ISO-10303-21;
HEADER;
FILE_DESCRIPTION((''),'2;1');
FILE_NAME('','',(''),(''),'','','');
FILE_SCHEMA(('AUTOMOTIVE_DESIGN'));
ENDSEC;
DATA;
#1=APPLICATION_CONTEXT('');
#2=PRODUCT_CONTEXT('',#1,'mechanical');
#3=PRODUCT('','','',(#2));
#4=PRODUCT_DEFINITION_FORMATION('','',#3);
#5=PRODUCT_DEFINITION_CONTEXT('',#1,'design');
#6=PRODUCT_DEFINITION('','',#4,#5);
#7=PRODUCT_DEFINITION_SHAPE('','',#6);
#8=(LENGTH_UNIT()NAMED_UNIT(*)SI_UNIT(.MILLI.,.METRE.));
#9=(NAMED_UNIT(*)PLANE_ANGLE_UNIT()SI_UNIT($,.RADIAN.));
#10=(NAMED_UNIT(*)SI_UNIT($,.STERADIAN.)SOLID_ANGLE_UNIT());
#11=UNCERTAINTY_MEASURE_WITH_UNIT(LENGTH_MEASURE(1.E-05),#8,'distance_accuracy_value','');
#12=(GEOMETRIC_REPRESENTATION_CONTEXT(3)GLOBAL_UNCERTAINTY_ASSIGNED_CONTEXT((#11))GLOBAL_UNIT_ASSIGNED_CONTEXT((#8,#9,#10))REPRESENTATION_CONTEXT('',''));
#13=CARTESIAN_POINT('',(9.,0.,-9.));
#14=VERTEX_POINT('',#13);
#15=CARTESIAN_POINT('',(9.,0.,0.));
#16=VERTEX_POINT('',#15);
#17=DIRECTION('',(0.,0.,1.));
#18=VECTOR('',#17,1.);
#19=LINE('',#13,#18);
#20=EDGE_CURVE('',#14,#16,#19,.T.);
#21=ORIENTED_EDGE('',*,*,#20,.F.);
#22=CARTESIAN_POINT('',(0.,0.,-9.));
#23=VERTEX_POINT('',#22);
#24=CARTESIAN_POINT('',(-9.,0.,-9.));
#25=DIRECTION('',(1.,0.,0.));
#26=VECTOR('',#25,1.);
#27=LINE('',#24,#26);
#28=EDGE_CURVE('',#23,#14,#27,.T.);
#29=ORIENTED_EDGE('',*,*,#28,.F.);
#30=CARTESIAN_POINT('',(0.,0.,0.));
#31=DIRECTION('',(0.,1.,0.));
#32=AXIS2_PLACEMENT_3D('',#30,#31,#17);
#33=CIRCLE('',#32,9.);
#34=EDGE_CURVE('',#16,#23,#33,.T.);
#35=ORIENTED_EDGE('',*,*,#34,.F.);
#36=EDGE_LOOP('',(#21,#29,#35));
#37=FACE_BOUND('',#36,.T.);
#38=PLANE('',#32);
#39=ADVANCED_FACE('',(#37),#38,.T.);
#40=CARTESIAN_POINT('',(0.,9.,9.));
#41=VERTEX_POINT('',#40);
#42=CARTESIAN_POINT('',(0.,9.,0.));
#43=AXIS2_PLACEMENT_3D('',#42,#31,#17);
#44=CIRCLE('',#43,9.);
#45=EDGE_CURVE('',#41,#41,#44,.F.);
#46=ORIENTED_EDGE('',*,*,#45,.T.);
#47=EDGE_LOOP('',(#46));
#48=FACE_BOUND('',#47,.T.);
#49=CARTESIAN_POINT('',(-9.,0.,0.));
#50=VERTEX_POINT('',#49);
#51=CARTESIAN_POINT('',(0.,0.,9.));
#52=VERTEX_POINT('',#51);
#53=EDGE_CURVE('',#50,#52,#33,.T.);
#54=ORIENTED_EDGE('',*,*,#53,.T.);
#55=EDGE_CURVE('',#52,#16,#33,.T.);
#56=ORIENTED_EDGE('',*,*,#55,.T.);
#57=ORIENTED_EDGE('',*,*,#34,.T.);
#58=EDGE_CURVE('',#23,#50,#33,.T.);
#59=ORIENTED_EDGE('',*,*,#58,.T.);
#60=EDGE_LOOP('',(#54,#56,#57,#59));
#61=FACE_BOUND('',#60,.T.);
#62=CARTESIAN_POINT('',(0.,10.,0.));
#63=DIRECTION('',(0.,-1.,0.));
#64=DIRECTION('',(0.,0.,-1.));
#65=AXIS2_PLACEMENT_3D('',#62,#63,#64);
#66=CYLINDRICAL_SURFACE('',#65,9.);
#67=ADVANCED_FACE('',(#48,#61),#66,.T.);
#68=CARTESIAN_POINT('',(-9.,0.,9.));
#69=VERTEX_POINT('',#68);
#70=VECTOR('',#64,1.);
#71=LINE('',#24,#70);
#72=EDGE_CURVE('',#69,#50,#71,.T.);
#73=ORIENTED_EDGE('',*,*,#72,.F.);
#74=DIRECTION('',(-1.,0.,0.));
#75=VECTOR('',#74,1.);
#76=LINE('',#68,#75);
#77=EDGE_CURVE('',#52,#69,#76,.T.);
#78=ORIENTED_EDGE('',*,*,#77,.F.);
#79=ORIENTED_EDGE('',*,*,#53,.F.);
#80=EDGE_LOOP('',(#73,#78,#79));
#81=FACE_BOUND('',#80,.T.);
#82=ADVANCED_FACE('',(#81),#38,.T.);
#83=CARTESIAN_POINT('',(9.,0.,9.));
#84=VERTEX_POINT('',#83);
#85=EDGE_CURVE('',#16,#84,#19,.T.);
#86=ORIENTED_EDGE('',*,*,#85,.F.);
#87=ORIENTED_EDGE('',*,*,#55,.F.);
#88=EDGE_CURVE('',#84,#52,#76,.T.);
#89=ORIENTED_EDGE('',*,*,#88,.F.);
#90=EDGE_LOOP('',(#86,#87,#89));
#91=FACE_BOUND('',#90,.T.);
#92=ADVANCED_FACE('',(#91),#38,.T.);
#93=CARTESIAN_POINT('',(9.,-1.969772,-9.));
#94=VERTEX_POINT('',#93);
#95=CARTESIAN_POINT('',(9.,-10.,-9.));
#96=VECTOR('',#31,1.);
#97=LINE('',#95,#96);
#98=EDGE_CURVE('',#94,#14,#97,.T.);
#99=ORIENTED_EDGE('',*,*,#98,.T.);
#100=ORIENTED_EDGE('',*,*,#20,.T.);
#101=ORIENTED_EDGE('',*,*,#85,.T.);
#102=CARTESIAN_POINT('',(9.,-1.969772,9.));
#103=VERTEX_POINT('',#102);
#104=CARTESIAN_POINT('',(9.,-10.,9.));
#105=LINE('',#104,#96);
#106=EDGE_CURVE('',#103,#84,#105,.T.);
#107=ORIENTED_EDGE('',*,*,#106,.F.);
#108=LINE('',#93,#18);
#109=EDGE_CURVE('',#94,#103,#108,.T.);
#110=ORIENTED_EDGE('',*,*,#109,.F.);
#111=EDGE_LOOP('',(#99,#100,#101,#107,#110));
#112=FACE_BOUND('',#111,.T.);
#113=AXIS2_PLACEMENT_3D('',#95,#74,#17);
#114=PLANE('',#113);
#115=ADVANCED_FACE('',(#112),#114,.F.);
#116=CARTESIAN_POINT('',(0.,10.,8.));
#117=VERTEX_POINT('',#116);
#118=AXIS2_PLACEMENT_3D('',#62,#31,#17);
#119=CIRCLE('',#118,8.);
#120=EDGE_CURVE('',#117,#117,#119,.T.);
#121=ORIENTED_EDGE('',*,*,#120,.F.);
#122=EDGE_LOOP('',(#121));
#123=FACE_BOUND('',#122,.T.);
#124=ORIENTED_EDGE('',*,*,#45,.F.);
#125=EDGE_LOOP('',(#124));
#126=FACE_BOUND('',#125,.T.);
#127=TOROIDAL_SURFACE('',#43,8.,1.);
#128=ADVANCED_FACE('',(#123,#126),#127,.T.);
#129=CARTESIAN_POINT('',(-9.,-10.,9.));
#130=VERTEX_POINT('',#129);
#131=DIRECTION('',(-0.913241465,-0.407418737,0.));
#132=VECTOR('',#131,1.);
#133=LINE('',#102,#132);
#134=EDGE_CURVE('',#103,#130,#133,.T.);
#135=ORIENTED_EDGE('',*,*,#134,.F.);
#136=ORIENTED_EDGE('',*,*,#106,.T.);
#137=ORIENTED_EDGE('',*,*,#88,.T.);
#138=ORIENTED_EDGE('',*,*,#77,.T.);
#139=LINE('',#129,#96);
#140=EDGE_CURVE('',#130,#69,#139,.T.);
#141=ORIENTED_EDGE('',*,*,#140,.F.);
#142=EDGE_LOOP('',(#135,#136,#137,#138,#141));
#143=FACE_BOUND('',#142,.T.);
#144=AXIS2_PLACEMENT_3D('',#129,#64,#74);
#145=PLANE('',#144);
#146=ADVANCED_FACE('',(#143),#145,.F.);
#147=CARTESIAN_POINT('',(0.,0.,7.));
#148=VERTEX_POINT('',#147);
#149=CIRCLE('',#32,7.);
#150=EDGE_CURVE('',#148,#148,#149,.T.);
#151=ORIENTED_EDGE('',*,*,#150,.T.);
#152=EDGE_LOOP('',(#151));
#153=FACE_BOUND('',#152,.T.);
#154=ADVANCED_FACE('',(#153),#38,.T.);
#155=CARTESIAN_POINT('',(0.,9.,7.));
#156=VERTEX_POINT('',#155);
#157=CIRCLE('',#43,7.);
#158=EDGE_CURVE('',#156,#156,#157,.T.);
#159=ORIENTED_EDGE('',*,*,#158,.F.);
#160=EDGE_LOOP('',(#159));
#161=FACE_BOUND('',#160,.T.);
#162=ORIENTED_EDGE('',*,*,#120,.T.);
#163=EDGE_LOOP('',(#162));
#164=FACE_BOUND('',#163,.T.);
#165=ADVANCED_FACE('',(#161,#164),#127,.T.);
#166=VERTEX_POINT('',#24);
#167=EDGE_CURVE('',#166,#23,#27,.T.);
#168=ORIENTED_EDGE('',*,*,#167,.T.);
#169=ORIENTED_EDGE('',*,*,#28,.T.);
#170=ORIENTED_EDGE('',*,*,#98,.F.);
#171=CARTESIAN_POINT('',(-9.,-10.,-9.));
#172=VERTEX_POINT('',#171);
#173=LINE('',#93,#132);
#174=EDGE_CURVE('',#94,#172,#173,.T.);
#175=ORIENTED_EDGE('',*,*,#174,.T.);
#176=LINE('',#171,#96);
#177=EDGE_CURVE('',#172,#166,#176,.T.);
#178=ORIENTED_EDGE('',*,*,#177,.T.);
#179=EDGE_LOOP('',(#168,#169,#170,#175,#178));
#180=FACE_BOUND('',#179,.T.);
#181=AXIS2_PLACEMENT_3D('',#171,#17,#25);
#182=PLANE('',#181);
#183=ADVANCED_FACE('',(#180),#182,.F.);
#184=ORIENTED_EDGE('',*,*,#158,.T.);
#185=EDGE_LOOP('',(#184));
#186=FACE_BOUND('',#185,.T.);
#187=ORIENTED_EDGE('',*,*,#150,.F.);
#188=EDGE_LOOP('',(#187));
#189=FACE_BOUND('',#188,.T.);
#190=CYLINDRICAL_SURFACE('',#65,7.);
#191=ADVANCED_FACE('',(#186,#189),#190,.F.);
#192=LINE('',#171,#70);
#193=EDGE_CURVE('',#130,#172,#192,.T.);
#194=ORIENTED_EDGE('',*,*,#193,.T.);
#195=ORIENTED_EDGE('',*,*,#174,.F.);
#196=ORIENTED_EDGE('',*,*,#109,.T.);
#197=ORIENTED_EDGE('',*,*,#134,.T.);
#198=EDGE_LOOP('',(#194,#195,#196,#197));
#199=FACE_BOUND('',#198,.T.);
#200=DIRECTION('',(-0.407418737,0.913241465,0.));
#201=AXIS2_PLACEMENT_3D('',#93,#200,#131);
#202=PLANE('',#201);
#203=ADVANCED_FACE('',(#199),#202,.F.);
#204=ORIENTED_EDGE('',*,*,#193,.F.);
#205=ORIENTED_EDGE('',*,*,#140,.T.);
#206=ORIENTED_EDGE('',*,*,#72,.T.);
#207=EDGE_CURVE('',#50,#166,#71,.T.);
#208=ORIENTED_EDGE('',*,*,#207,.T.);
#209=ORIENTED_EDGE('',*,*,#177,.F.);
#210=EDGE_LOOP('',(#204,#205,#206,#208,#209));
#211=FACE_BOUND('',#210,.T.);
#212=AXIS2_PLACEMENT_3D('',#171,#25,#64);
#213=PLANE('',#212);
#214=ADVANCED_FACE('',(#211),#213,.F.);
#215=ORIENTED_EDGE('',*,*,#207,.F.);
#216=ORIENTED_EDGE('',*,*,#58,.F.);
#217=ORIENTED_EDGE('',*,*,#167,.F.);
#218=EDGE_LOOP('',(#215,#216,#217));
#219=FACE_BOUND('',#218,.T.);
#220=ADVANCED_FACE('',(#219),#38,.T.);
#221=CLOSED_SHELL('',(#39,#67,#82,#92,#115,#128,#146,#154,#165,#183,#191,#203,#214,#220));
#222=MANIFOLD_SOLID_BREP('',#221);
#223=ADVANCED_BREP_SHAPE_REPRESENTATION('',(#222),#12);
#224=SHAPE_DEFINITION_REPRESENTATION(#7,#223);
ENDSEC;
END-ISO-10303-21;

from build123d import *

# Parameters (mm, degrees)
SKETCH1_R           = 9
SKETCH1_R_2         = 7
BOSS_EXTRUDE1_DEPTH = 10
FILLET1_R           = 1
SKETCH2_W           = 18
SKETCH2_H           = 18
BOSS_EXTRUDE2_DEPTH = 10
CUT_EXTRUDE1_DEPTH  = 23.472205054


with BuildPart() as part:
    # Sketch1 → Boss-Extrude1 (new body)
    with BuildSketch(Plane(origin=(0, 0, 0), x_dir=(1, 0, 0), z_dir=(0, 1, 0))):
        with Locations(Location((0, 0, 0), (0, 0, 270))):
            Circle(SKETCH1_R)
        with Locations(Location((0, 0, 0), (0, 0, 270))):
            Circle(SKETCH1_R_2, mode=Mode.SUBTRACT)
    extrude(amount=BOSS_EXTRUDE1_DEPTH)

    # Fillet1
    fillet1_edges = [part.edges().sort_by_distance(p)[0] for p in [
        (0, 10, -9),
        (0, 10, -7),
    ]]
    fillet(fillet1_edges, radius=FILLET1_R - 0.0001)  # a hair under: the kernel refuses the full size

    # Sketch2 → Boss-Extrude2 (add)
    with BuildSketch(Plane.XZ):
        Rectangle(SKETCH2_W, SKETCH2_H)
    extrude(amount=BOSS_EXTRUDE2_DEPTH)

    # Sketch4 → Cut-Extrude1 (cut, through all)
    with BuildSketch(Plane.XY.offset(9)):
        Polygon((-9, -10), (9, -10), (9, -1.969771915), align=None)
    extrude(amount=-CUT_EXTRUDE1_DEPTH, mode=Mode.SUBTRACT)


solid = part.part
